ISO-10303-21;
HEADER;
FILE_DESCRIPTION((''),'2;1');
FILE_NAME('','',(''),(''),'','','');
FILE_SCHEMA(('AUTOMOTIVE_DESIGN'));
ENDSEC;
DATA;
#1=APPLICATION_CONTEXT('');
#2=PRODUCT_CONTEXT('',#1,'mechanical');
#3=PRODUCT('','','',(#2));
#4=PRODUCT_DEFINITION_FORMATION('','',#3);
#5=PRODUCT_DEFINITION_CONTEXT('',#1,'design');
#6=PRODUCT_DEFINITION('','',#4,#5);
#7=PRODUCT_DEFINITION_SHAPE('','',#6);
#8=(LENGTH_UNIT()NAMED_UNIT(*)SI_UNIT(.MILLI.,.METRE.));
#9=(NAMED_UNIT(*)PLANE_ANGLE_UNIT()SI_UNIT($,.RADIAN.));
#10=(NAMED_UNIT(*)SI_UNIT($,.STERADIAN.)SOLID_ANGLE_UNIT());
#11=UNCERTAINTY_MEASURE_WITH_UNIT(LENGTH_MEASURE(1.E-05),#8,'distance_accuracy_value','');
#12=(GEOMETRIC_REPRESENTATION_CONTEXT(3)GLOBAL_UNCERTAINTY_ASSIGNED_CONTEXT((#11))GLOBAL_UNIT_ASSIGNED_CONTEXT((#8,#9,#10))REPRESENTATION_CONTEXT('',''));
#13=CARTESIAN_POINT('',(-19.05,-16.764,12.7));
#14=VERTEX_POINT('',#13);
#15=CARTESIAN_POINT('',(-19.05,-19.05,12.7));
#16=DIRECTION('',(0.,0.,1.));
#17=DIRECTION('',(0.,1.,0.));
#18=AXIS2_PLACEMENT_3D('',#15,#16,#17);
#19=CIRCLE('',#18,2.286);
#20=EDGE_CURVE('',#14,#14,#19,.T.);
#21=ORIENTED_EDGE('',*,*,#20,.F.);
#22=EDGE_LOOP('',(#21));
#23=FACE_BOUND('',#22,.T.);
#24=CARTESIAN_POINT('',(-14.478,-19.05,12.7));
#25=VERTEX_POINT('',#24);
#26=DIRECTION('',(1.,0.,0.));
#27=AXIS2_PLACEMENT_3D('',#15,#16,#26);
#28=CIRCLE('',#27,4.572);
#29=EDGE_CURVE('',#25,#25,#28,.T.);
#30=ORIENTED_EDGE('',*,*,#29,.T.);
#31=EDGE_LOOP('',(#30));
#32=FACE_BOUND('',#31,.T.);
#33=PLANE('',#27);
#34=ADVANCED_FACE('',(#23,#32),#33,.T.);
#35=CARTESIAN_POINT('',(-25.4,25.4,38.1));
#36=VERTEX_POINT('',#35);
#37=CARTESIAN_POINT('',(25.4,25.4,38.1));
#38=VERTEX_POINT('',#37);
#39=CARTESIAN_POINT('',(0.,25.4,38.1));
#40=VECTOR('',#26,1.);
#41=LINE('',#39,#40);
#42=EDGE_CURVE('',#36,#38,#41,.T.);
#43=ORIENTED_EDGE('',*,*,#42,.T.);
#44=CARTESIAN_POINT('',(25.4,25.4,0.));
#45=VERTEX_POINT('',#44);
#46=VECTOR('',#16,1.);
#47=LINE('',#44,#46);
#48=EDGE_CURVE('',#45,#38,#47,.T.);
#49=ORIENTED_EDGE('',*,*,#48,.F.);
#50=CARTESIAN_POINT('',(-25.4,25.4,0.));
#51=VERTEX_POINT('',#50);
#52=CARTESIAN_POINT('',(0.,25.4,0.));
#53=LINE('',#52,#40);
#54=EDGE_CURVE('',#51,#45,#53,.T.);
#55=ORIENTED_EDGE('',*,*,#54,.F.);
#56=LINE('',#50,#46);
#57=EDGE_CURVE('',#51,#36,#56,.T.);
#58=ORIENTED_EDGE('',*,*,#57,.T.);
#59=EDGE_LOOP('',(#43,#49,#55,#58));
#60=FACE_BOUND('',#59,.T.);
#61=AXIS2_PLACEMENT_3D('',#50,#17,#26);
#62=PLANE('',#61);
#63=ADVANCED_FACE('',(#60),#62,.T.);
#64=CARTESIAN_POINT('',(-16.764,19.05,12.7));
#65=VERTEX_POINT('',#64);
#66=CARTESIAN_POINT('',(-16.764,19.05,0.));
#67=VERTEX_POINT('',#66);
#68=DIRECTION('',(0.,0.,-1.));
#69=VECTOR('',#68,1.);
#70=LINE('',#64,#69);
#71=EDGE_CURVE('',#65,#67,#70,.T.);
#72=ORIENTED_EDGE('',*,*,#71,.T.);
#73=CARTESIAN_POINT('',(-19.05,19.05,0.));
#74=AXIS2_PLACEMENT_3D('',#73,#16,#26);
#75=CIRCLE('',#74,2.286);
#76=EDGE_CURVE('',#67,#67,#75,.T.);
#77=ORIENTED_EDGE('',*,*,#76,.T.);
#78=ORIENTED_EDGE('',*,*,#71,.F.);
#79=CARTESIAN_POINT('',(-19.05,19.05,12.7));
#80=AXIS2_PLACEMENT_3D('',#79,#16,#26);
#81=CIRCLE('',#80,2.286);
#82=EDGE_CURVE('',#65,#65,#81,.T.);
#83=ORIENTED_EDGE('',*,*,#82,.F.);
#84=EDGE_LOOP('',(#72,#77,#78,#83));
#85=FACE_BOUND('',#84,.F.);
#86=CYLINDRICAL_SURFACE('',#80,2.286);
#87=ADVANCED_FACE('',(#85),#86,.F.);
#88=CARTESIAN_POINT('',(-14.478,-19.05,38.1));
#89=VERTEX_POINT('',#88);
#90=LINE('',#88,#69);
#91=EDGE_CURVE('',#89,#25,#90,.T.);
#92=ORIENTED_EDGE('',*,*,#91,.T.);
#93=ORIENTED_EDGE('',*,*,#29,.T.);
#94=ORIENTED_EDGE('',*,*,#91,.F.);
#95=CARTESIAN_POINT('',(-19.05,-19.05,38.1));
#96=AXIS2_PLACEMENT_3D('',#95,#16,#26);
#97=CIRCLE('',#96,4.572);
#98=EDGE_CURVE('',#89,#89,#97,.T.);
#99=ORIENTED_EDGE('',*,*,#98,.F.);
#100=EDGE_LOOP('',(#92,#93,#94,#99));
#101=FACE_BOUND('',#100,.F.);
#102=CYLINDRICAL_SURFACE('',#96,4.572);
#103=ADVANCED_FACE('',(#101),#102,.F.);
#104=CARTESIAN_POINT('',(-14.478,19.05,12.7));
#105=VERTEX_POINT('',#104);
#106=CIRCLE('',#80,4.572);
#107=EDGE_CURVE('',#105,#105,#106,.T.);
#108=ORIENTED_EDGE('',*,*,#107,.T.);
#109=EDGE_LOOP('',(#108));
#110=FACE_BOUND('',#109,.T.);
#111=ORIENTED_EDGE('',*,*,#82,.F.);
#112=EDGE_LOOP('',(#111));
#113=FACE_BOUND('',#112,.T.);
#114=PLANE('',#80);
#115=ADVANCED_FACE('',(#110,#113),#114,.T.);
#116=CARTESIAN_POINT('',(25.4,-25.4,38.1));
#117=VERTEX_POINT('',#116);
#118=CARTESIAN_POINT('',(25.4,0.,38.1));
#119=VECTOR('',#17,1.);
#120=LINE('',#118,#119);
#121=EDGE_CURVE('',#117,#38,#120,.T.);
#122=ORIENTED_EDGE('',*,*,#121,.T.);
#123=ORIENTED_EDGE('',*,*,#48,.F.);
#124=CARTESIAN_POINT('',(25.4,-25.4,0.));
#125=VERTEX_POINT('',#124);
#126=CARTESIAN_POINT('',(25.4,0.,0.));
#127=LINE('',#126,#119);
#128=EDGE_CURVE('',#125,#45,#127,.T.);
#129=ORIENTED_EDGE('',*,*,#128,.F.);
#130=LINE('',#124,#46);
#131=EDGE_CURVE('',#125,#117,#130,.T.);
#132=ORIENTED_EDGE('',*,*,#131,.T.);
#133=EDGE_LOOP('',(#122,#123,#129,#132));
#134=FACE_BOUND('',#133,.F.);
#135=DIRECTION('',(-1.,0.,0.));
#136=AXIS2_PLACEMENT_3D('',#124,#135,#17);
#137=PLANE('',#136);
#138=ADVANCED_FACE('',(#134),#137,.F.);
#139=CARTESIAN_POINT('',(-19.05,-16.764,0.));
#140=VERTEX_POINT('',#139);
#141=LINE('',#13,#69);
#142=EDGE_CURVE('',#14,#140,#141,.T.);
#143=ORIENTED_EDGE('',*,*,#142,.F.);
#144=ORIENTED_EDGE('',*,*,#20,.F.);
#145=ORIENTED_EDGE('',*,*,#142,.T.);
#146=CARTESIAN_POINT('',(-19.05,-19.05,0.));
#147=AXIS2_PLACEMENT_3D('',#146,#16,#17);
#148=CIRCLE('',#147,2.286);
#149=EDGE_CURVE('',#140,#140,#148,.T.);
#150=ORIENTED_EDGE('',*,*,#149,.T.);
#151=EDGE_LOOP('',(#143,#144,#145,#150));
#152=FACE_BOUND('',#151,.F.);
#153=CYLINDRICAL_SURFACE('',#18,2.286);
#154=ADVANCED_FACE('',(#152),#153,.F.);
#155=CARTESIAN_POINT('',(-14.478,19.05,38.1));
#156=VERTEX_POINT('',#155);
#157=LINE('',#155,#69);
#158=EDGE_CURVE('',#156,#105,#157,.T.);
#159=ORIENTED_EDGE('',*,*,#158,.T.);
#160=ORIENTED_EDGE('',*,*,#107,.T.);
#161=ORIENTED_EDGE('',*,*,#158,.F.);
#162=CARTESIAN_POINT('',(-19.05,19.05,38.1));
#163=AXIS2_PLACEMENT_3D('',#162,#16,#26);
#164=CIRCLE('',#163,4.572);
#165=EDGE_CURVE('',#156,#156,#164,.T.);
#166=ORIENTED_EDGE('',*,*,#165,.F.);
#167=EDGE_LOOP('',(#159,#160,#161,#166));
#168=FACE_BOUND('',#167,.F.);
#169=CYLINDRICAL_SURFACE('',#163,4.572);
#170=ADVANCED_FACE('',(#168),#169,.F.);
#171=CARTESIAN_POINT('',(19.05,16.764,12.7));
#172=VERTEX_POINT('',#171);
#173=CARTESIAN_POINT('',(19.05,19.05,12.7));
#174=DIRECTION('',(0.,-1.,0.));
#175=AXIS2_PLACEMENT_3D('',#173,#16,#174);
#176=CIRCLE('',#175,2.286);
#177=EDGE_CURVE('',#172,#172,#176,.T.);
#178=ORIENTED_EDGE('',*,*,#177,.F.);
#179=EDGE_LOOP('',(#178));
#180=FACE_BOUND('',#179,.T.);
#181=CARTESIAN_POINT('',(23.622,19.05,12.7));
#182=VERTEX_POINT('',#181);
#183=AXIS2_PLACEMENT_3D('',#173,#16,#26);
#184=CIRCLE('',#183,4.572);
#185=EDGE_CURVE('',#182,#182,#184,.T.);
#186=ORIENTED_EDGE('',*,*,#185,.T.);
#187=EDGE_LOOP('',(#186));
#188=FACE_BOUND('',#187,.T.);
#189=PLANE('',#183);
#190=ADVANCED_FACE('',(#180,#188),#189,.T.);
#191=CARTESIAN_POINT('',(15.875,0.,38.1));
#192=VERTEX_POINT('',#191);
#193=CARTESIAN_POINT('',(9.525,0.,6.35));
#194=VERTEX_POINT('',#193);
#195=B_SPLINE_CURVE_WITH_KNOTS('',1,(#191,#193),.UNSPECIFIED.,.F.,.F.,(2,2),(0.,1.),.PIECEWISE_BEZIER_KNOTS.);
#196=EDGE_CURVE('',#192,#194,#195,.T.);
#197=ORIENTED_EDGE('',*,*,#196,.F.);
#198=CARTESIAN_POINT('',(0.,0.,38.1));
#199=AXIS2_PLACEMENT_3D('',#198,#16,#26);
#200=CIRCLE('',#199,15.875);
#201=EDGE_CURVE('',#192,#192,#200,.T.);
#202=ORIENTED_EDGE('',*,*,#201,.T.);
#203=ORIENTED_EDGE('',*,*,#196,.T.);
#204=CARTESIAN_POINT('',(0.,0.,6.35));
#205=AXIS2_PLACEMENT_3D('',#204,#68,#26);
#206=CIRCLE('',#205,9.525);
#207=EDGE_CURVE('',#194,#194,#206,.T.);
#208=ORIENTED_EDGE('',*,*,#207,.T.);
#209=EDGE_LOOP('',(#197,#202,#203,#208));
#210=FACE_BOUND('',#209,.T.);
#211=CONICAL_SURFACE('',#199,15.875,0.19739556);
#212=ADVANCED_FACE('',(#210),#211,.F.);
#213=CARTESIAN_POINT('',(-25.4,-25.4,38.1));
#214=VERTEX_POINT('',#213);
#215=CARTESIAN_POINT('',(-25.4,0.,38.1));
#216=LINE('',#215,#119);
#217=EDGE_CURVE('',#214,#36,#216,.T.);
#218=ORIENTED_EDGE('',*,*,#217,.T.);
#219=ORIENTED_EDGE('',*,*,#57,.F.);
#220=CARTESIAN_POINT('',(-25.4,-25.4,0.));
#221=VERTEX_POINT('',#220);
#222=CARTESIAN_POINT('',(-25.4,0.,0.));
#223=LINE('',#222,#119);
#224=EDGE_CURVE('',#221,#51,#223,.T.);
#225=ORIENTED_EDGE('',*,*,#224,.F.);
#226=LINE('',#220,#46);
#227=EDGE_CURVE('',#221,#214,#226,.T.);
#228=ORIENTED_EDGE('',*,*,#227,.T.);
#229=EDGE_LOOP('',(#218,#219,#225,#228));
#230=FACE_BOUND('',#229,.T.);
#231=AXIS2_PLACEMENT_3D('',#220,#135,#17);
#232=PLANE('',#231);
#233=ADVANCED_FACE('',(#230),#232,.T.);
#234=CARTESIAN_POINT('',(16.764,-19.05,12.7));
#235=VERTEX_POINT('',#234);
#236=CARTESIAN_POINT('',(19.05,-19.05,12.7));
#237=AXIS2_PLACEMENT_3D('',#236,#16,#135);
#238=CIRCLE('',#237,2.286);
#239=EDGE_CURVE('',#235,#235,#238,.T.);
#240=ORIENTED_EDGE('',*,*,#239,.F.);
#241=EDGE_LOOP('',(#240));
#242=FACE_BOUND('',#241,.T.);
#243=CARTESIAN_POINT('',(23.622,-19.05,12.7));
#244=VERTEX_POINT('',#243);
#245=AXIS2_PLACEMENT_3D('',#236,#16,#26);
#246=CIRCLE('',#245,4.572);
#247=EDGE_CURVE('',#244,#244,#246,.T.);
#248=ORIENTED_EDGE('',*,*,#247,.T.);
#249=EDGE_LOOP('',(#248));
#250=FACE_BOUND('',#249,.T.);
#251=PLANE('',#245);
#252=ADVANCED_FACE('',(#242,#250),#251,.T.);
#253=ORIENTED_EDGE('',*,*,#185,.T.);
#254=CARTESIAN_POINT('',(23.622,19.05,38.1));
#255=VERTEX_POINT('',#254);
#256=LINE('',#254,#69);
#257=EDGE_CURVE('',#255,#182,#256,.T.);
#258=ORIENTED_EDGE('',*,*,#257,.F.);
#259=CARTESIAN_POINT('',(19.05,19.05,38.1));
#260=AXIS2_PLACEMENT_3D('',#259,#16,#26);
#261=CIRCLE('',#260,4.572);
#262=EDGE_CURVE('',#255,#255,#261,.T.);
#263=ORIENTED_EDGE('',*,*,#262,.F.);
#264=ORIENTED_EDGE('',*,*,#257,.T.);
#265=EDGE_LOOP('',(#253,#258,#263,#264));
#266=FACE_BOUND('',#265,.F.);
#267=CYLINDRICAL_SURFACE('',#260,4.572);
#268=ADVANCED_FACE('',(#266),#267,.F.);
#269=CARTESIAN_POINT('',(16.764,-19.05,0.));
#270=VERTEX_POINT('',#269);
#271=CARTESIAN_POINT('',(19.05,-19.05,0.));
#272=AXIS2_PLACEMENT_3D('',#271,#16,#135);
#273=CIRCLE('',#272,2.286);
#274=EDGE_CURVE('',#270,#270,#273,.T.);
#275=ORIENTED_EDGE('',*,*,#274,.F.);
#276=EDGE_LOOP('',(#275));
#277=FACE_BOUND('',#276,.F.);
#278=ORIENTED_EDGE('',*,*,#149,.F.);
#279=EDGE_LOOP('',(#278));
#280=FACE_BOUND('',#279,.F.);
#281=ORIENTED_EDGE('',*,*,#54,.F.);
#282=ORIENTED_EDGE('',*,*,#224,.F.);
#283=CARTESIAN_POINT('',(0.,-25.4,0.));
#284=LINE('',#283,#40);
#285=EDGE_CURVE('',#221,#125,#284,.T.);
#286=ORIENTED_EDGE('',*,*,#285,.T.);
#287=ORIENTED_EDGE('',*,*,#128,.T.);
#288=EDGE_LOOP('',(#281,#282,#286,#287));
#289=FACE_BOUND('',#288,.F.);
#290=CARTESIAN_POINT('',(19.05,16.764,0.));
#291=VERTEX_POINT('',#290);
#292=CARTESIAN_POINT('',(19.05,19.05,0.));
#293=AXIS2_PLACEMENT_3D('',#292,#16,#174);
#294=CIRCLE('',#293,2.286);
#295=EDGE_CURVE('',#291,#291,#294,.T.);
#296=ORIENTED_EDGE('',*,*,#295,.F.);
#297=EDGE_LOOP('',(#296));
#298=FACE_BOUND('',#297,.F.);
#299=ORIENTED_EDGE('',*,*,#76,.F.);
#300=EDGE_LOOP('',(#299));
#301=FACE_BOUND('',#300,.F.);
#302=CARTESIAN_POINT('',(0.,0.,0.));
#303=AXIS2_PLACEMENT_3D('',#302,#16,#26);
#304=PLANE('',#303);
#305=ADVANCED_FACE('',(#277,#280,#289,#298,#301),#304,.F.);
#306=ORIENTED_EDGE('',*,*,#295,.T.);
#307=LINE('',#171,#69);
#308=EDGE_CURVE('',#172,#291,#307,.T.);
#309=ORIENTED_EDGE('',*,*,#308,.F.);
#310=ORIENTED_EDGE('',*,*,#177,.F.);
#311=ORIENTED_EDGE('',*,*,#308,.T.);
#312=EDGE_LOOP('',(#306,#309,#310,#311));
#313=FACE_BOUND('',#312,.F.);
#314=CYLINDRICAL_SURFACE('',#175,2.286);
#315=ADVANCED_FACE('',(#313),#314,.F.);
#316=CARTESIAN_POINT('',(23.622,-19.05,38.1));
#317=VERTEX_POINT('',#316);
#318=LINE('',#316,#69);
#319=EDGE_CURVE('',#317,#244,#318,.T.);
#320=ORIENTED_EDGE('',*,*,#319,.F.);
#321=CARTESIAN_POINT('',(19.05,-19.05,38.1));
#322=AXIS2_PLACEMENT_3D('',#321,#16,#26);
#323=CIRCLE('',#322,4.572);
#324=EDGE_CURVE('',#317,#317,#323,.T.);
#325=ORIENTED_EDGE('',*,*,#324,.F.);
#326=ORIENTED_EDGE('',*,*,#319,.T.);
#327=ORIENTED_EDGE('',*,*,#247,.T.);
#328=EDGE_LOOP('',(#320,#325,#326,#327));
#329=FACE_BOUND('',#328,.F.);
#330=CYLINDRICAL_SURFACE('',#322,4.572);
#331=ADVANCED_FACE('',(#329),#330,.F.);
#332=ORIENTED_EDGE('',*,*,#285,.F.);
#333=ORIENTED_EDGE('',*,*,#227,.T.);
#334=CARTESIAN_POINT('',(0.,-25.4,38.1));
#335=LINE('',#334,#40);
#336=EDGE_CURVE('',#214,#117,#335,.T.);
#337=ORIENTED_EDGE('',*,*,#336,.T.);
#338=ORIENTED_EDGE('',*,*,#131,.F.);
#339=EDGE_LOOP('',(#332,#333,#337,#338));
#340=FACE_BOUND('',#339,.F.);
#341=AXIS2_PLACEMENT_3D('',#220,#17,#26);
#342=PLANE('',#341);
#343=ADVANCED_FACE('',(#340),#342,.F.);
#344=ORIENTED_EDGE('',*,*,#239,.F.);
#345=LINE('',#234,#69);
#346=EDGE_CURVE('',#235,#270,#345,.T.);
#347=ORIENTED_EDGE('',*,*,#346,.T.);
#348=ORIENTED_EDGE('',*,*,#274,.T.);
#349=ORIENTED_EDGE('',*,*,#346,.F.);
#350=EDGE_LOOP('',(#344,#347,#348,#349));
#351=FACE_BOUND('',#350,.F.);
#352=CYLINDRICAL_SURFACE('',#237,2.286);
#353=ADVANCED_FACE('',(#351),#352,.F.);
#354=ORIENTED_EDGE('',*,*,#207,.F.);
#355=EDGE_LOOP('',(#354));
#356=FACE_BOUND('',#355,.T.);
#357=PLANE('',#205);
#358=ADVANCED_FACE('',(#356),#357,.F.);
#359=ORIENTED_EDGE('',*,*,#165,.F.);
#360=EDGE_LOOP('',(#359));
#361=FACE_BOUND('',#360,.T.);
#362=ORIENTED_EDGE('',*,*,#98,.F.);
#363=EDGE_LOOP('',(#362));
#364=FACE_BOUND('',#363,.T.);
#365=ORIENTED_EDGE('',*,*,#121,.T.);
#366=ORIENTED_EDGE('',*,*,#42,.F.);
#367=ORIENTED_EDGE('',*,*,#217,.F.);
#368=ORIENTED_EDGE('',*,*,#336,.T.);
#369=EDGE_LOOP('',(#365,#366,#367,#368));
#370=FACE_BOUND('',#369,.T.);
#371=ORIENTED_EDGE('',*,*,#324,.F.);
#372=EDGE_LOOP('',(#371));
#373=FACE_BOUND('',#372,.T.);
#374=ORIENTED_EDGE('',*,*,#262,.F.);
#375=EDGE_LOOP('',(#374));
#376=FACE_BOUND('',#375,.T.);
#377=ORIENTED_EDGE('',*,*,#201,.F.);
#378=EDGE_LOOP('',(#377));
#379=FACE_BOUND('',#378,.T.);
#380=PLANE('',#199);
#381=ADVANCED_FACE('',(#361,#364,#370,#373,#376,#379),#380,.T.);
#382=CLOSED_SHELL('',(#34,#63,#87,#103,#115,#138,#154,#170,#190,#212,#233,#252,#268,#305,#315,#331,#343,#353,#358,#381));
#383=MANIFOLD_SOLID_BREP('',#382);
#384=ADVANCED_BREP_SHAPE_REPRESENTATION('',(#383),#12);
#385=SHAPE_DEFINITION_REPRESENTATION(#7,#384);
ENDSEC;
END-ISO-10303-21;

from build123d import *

# Parameters (mm, degrees)
F0_W             = 50.8
F0_H             = 50.8
F1_DEPTH         = 38.1
F2_R             = 15.875
F4_R             = 9.525
F6_R             = 4.572
F7_DEPTH         = 25.4
F9_R             = 2.286
F10_DEPTH        = 12.701
F10_COPIES_COUNT = 4


# Not quite as in the source:
# - a pattern or mirror of a feature is missing from the dataset's text; its kind, count and spacing are read off the source's solid


with BuildPart() as f1:
    # F0 (on Top) → F1 (new body)
    with BuildSketch(Plane.XY):
        Rectangle(F0_W, F0_H)
    extrude(amount=F1_DEPTH)

    # F2 (on face) → F5 section 0
    with BuildSketch(Plane.XY.offset(38.1)):
        Circle(F2_R)
    # F4 (on offset) → F5 section 1
    with BuildSketch(Plane(origin=(0, 0, 6.35), x_dir=(1, 0, 0), z_dir=(0, 0, -1))):
        Circle(F4_R)
    loft(mode=Mode.SUBTRACT)

    # F6 (on face) → F7 (cut)
    with BuildSketch(Plane.XY.offset(38.1)):
        with Locations((19.05, -19.05)):
            Circle(F6_R)
        with Locations((19.05, 19.05)):
            Circle(F6_R)
        with Locations((-19.05, 19.05)):
            Circle(F6_R)
        with Locations((-19.05, -19.05)):
            Circle(F6_R)
    extrude(amount=-F7_DEPTH, mode=Mode.SUBTRACT)

    # F9 (on offset) → F10 (cut, through all)
    with BuildSketch(Plane.XY.offset(12.7)):
        with Locations((-19.05, 19.05)):
            Circle(F9_R)
    f10 = extrude(amount=-F10_DEPTH, mode=Mode.SUBTRACT)

    # F10_copies: F10 ×4 about axis
    f10_copies_axis = Axis((0, 0, 0), (0, 0, 1))
    for i in range(1, F10_COPIES_COUNT):
        add(f10.rotate(f10_copies_axis, i * 360 / F10_COPIES_COUNT), mode=Mode.SUBTRACT)


solid = f1.part
